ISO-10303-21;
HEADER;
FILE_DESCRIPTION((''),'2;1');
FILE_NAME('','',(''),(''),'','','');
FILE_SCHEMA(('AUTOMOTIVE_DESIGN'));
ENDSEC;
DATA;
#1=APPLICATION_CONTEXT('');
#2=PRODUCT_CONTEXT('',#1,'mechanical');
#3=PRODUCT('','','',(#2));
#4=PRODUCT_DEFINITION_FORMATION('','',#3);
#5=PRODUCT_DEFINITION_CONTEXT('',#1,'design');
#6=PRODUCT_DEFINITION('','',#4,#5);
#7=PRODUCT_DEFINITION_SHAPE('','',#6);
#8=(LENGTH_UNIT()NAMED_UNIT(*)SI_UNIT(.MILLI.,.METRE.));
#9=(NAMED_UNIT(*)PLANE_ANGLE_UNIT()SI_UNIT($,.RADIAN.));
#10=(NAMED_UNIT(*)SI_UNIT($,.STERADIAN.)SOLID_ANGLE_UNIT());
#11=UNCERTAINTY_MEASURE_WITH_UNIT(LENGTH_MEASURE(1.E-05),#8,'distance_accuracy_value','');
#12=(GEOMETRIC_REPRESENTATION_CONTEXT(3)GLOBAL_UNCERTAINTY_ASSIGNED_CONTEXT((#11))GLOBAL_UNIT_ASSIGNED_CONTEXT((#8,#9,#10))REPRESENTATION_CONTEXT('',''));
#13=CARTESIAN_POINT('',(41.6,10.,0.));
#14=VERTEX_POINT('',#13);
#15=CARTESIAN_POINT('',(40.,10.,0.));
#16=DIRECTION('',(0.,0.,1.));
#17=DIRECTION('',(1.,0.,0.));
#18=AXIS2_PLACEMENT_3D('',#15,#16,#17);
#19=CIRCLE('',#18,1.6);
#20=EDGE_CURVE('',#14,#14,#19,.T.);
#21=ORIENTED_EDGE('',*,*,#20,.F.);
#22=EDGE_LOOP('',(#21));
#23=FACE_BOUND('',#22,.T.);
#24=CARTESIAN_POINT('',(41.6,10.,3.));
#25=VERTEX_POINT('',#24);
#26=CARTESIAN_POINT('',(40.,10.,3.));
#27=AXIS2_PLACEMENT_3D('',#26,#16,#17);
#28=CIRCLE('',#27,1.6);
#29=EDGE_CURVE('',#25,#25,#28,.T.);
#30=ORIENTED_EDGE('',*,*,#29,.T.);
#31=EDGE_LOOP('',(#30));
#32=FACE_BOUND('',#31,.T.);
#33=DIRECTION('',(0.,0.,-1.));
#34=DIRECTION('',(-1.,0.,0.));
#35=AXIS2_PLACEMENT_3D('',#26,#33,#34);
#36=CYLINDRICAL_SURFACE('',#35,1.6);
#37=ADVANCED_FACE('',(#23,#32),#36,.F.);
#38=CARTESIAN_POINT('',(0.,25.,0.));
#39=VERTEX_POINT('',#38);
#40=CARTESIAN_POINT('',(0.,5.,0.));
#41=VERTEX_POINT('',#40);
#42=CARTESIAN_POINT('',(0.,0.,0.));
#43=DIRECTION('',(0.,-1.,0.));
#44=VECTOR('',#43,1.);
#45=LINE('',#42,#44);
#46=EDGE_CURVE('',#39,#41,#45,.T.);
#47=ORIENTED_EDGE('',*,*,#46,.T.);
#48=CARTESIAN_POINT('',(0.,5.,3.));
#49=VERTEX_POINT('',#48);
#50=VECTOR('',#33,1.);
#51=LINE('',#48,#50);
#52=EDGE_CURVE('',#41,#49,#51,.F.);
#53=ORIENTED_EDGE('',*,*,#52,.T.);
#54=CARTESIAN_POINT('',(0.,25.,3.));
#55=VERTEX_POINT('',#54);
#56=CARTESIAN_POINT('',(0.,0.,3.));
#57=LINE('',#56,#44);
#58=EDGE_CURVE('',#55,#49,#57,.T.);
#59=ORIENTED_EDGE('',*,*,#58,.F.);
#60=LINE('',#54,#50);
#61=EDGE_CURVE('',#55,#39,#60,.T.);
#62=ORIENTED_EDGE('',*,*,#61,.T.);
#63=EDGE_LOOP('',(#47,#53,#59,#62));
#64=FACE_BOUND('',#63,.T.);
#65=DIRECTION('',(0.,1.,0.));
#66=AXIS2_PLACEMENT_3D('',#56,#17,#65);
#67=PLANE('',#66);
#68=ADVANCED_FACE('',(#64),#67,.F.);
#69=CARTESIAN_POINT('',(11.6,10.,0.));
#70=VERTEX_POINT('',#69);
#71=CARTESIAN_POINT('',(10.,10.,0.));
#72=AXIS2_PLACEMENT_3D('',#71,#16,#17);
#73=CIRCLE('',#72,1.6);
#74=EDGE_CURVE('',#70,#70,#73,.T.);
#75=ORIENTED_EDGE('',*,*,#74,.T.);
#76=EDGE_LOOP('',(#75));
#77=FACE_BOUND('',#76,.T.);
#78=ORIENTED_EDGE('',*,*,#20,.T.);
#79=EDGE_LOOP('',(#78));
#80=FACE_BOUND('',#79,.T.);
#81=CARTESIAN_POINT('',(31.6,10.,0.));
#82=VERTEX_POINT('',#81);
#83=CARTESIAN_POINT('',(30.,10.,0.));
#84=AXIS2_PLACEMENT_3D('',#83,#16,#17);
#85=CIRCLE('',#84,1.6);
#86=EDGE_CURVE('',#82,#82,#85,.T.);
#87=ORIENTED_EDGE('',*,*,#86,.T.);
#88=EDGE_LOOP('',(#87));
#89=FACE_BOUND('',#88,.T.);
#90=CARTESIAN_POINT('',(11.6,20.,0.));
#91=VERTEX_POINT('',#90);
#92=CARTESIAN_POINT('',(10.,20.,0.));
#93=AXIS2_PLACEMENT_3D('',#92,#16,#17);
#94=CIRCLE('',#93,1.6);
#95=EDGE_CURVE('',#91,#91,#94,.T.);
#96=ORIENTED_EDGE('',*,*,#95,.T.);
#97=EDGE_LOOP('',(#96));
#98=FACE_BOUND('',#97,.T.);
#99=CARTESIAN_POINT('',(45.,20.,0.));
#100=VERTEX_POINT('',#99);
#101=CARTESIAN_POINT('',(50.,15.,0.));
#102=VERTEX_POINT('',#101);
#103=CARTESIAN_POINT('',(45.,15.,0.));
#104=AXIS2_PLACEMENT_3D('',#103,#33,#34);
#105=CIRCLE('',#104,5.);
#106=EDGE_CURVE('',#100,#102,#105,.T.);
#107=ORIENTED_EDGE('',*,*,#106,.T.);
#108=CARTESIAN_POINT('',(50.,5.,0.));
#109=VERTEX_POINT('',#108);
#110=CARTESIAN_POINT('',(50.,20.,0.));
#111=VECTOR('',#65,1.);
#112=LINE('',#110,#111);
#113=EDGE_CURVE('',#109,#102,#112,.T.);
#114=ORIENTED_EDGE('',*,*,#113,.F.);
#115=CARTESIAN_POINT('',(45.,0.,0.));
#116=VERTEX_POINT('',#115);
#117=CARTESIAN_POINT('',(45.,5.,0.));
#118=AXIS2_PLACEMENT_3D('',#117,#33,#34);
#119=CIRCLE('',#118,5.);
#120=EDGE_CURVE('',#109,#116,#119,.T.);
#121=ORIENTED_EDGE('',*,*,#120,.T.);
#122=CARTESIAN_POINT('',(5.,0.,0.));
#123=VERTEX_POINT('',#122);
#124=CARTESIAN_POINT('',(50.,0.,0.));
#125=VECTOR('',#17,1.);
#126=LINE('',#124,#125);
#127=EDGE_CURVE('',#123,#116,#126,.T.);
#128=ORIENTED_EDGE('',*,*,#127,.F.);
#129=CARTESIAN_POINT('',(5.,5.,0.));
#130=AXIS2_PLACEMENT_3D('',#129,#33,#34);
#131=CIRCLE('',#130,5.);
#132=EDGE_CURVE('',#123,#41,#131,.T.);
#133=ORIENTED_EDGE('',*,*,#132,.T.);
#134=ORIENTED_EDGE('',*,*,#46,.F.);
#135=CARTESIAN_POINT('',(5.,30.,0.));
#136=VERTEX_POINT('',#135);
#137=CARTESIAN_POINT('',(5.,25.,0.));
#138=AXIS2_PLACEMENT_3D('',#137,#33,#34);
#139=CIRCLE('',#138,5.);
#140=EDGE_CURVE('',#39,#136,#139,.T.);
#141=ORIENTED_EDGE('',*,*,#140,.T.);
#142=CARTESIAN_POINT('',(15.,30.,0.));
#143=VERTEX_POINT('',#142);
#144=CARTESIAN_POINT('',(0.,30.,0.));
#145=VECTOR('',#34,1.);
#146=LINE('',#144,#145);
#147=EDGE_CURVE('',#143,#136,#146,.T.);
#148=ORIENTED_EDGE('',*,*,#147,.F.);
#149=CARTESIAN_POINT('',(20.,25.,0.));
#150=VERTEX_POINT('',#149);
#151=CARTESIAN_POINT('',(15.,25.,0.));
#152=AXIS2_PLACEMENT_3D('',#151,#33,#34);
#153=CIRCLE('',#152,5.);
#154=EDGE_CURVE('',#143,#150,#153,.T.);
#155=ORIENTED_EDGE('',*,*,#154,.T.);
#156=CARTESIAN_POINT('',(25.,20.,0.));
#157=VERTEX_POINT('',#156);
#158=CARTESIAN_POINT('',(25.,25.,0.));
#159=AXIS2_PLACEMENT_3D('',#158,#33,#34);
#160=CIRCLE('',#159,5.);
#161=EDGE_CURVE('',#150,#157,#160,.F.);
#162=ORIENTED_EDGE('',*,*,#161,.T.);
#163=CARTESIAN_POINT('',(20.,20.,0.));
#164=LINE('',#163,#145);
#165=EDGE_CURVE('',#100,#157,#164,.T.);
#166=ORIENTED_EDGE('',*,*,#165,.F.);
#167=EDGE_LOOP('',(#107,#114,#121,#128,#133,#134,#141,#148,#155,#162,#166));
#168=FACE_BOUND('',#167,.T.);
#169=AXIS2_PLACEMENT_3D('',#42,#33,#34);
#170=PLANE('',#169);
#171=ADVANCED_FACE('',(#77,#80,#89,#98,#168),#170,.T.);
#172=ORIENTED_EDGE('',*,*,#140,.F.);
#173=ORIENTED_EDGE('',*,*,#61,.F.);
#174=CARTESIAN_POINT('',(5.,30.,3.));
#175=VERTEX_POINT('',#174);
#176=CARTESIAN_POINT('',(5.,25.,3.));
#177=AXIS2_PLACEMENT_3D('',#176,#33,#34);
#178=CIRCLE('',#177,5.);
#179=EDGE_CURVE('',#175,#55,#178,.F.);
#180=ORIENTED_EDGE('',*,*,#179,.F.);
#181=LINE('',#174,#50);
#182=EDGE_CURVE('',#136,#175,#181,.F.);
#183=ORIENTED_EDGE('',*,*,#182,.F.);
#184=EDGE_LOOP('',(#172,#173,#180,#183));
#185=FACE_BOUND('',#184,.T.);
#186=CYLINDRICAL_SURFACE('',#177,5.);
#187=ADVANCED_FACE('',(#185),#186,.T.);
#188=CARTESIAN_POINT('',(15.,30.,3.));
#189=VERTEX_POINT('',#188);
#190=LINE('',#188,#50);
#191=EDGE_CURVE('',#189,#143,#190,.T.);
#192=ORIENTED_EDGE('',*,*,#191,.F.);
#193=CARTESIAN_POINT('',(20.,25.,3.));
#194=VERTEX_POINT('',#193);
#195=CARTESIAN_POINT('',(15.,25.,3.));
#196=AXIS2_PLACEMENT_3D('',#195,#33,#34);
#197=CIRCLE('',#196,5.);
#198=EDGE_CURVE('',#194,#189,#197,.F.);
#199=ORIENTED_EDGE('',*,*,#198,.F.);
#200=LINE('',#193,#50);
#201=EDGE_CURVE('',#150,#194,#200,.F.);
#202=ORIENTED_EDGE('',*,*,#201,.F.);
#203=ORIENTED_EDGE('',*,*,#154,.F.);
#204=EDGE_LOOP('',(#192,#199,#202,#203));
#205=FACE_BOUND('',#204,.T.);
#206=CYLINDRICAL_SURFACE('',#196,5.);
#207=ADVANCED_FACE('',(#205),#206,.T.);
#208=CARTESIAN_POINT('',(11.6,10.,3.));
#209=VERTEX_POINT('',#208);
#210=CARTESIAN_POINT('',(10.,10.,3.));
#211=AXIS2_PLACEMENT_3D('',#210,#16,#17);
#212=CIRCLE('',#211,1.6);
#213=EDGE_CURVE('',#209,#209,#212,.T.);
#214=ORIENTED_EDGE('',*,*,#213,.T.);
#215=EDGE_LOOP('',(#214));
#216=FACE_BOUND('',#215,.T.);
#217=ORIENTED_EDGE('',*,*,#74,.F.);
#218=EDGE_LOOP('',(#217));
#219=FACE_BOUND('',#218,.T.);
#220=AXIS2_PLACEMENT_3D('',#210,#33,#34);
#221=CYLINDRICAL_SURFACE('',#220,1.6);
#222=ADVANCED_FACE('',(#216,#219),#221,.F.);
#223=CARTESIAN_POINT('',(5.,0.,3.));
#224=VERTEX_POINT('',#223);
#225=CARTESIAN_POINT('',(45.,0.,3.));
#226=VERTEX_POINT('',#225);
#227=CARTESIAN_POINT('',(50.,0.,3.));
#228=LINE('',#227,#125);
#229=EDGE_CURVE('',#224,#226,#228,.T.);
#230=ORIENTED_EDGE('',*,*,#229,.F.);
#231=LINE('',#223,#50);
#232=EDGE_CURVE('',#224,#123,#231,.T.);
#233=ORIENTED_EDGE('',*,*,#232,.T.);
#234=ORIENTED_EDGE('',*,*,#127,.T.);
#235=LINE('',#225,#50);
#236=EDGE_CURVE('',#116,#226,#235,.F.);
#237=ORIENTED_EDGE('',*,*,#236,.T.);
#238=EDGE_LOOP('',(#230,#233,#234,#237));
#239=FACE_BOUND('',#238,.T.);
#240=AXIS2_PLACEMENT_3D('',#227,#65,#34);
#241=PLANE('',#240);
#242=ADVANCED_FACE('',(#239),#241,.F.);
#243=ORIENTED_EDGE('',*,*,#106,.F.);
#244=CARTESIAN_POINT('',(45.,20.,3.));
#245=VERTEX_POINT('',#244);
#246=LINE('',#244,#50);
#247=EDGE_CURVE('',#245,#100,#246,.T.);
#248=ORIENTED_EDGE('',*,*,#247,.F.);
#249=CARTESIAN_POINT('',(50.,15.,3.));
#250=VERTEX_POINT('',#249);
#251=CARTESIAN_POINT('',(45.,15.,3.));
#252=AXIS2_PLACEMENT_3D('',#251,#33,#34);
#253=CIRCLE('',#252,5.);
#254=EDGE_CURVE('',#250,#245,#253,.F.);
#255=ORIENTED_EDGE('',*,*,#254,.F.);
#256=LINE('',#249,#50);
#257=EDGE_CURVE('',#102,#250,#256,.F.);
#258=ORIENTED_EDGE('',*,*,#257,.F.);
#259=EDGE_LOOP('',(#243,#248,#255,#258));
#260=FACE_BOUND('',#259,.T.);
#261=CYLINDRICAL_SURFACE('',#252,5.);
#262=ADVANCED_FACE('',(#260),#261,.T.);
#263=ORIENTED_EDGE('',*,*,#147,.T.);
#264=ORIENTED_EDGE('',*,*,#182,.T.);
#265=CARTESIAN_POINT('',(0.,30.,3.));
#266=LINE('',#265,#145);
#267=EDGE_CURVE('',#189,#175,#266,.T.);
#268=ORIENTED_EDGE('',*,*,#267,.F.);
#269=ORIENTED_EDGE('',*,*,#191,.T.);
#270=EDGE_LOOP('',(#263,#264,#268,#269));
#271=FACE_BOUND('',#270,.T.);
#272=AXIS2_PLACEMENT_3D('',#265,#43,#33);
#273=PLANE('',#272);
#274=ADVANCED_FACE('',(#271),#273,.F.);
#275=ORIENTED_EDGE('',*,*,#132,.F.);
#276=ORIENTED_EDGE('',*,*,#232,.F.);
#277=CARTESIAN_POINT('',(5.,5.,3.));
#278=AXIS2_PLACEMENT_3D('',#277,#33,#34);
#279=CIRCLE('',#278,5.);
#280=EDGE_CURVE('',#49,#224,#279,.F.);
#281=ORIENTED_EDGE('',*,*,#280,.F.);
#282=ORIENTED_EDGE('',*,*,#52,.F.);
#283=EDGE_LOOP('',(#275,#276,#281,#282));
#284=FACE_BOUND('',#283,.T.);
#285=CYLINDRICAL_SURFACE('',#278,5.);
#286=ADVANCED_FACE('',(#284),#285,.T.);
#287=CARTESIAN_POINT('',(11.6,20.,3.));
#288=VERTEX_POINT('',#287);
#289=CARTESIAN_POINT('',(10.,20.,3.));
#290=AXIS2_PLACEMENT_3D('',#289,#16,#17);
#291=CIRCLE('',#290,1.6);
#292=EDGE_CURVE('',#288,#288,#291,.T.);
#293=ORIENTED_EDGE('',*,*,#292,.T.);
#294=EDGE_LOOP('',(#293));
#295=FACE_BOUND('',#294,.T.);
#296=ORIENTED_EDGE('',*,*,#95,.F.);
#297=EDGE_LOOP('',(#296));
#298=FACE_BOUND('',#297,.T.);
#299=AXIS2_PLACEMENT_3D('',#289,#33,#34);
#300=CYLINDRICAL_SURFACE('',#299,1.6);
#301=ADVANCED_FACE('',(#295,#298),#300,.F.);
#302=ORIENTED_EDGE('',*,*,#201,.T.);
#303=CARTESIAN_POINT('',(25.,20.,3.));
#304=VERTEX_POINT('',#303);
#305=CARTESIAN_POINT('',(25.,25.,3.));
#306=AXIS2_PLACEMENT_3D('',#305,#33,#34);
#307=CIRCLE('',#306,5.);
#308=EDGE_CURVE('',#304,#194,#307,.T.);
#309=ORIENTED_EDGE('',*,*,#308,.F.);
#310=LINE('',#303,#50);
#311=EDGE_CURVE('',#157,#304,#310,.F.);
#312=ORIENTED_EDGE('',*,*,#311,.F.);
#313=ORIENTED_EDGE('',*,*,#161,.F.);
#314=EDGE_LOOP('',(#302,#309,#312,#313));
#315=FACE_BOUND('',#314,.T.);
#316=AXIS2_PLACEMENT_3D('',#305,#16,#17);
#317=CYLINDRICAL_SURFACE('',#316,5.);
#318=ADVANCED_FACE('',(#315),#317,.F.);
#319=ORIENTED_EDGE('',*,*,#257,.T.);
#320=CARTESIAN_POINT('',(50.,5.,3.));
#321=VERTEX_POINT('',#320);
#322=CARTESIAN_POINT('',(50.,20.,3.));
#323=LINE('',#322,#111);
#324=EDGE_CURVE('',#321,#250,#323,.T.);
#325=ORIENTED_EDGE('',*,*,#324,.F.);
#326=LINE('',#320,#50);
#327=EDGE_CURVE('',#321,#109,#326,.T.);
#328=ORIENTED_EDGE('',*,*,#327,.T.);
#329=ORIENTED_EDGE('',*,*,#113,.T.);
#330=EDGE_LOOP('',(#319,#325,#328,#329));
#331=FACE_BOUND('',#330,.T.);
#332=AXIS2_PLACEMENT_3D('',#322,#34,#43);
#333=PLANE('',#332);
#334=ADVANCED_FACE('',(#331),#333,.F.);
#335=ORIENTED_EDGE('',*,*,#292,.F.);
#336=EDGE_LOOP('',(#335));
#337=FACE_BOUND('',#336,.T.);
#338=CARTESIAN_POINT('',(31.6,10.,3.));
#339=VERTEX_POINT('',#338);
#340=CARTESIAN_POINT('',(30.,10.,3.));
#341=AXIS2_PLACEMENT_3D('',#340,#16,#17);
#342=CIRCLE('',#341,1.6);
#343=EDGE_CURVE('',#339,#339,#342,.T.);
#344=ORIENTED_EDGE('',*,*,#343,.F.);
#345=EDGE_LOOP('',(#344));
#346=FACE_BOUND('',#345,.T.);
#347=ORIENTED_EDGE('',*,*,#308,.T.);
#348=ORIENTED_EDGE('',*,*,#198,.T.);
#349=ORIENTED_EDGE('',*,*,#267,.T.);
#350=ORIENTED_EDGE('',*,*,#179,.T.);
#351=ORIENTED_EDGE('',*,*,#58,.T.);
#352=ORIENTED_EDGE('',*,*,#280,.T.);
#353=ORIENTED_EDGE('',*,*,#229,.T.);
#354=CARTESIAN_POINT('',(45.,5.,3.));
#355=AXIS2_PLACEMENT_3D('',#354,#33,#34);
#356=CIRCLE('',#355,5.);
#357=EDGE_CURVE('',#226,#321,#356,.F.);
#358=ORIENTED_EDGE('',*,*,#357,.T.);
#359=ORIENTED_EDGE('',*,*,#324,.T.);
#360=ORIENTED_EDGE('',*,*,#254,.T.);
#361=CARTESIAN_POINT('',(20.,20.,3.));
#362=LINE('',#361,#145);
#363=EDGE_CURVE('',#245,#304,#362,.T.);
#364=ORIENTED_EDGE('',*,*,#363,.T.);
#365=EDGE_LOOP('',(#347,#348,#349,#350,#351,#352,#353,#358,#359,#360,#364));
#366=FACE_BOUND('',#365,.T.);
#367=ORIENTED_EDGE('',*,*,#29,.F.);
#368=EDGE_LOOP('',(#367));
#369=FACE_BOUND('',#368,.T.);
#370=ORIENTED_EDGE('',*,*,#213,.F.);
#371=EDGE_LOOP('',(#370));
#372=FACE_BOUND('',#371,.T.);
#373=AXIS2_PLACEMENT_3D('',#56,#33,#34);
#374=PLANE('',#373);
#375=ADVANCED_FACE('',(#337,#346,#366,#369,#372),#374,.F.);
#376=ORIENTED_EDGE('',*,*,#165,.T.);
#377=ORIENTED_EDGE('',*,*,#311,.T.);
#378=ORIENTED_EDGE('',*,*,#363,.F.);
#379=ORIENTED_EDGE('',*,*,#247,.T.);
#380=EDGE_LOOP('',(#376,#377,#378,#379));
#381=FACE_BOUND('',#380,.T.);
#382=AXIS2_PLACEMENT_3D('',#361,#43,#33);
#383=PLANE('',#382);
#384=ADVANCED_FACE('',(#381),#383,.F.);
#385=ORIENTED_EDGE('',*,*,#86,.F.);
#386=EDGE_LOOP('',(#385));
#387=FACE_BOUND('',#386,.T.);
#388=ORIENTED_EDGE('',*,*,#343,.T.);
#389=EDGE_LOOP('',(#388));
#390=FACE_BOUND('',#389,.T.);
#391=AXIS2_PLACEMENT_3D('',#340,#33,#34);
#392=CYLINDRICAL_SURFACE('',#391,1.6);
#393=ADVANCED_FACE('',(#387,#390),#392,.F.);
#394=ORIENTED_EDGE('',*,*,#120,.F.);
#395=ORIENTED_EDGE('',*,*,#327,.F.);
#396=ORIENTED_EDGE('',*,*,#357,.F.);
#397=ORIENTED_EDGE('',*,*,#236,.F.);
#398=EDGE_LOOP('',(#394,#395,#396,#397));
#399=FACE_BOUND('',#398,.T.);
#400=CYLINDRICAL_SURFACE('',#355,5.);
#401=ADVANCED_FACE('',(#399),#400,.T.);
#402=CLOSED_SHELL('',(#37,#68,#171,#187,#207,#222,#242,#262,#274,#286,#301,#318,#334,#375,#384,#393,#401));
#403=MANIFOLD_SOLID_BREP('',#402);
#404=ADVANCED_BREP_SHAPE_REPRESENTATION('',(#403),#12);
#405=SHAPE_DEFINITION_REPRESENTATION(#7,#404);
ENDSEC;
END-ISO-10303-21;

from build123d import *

# Parameters (mm, degrees)
SKETCH_1_R      = 1.6
EXTRUDE_1_DEPTH = 3
FILLET_1_R      = 5


with BuildPart() as part:
    # 草图1 → 凸台-拉伸1 (new body)
    with BuildSketch(Plane.XY):
        Polygon((0, 0), (0, 30), (20, 30), (20, 20), (50, 20), (50, 0), align=None)
        with Locations((10, 20)):
            Circle(SKETCH_1_R, mode=Mode.SUBTRACT)
        with Locations((10, 10)):
            Circle(SKETCH_1_R, mode=Mode.SUBTRACT)
        with Locations((30, 10)):
            Circle(SKETCH_1_R, mode=Mode.SUBTRACT)
        with Locations((40, 10)):
            Circle(SKETCH_1_R, mode=Mode.SUBTRACT)
    extrude(amount=EXTRUDE_1_DEPTH)

    # 圆角1
    fillet_1_edges = [part.edges().sort_by_distance(p)[0] for p in [
        (0, 0, 1.5),
        (50, 0, 1.5),
        (50, 20, 1.5),
        (20, 20, 1.5),
        (20, 30, 1.5),
        (0, 30, 1.5),
    ]]
    fillet(fillet_1_edges, radius=FILLET_1_R - 0.0001)  # a hair under: the kernel refuses the full size


solid = part.part
